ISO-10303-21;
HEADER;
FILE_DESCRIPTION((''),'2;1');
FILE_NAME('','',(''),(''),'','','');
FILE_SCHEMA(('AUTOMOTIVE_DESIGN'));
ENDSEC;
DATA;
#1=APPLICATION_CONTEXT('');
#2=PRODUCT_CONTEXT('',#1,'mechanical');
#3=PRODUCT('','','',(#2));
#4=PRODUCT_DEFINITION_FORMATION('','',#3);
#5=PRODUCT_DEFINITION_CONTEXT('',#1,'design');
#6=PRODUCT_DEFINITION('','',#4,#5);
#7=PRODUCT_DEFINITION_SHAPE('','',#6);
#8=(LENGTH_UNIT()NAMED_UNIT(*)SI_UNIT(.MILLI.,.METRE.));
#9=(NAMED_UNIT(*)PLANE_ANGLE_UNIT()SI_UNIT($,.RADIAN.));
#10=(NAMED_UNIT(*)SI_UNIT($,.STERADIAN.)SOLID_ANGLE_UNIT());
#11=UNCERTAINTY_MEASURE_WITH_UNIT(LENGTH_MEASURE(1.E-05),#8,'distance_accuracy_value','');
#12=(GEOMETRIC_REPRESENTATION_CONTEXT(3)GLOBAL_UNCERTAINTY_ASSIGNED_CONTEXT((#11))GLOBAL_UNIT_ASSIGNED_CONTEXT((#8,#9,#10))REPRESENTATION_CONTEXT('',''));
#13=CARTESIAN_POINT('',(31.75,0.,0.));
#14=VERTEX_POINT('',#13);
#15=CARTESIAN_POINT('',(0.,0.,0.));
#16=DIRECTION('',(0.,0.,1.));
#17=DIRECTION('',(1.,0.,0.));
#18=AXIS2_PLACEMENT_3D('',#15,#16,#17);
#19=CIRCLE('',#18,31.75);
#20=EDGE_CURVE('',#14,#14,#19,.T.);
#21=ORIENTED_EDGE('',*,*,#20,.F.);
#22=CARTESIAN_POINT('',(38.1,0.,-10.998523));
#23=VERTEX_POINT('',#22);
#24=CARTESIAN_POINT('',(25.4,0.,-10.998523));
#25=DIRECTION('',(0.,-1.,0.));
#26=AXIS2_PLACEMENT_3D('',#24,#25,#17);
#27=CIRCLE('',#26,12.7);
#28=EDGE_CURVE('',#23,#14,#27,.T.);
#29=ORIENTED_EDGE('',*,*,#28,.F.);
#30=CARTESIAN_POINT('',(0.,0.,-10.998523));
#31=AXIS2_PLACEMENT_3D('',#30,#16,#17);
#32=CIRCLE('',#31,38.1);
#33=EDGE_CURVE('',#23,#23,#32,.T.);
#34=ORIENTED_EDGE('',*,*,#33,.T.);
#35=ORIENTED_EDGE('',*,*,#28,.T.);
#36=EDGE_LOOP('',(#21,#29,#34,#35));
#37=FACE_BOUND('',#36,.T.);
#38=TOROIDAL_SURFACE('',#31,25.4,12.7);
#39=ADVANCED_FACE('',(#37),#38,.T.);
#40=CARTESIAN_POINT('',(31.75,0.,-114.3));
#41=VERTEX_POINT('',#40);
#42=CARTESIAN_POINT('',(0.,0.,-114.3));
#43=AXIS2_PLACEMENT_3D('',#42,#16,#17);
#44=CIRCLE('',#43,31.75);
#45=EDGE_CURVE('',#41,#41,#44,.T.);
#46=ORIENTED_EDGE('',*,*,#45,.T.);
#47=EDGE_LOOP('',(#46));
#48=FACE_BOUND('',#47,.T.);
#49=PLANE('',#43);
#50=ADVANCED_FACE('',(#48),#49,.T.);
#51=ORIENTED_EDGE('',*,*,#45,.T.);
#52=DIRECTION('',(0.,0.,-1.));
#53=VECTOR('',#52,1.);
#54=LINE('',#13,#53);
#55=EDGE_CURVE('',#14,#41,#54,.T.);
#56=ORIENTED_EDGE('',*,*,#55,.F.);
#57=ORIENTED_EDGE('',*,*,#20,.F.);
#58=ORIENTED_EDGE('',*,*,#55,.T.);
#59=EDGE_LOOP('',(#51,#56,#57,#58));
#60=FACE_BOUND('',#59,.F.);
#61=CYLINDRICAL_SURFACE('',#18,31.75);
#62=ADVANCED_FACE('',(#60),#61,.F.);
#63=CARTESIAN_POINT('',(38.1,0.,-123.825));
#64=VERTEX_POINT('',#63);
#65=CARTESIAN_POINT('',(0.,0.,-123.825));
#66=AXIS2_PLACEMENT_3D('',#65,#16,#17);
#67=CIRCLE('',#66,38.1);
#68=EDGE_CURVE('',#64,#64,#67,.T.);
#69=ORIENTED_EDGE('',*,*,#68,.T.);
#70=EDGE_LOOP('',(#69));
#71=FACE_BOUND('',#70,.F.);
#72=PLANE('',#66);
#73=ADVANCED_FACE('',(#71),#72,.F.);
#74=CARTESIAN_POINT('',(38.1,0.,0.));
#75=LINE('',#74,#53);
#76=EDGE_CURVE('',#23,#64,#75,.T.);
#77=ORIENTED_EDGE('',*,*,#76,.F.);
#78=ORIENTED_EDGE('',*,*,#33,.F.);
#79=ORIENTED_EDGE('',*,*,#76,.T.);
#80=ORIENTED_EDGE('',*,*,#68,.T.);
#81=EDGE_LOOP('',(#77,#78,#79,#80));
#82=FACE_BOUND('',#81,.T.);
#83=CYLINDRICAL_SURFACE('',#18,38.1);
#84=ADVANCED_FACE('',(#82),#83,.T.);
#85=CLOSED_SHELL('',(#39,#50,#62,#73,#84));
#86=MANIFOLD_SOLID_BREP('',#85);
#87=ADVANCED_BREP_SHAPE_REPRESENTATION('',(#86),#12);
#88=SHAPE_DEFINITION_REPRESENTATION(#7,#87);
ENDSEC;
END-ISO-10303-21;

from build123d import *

# Parameters (mm, degrees)
F0_R     = 38.1
F0_R_2   = 31.75
F1_DEPTH = 123.825
F2_DEPTH = 114.3


# Not quite as in the source:
# - a fillet or chamfer that OpenCascade refuses, or shapes differently, is made with other operations: its cross-section is extruded or revolved along the edge and cut away or added


with BuildPart() as f1:
    # F0 (on Top) → F1 (new body)
    with BuildSketch(Plane.XY):
        Circle(F0_R)
        Circle(F0_R_2, mode=Mode.SUBTRACT)
        Circle(F0_R_2)
    extrude(amount=-F1_DEPTH)

    # F0 (on Top) → F2 (cut)
    with BuildSketch(Plane.XY):
        Circle(F0_R_2)
    extrude(amount=-F2_DEPTH, mode=Mode.SUBTRACT)

    # F3: fillet of radius 12.7 on 1 edges, made by hand

    # F3_s1 → F3_t2 (revolve, cut)
    with BuildSketch(Plane.XZ):
        with BuildLine():
            ThreePointArc((38.1, -10.9985226281), (36.3985226281, -4.6485226281), (31.75, 0))
            Line((31.75, 0), (38.1, 0))
            Line((38.1, 0), (38.1, -10.9985226281))
        make_face()
    revolve(axis=Axis((0, 0, 0), (0, 0, 1)), mode=Mode.SUBTRACT)


solid = f1.part
